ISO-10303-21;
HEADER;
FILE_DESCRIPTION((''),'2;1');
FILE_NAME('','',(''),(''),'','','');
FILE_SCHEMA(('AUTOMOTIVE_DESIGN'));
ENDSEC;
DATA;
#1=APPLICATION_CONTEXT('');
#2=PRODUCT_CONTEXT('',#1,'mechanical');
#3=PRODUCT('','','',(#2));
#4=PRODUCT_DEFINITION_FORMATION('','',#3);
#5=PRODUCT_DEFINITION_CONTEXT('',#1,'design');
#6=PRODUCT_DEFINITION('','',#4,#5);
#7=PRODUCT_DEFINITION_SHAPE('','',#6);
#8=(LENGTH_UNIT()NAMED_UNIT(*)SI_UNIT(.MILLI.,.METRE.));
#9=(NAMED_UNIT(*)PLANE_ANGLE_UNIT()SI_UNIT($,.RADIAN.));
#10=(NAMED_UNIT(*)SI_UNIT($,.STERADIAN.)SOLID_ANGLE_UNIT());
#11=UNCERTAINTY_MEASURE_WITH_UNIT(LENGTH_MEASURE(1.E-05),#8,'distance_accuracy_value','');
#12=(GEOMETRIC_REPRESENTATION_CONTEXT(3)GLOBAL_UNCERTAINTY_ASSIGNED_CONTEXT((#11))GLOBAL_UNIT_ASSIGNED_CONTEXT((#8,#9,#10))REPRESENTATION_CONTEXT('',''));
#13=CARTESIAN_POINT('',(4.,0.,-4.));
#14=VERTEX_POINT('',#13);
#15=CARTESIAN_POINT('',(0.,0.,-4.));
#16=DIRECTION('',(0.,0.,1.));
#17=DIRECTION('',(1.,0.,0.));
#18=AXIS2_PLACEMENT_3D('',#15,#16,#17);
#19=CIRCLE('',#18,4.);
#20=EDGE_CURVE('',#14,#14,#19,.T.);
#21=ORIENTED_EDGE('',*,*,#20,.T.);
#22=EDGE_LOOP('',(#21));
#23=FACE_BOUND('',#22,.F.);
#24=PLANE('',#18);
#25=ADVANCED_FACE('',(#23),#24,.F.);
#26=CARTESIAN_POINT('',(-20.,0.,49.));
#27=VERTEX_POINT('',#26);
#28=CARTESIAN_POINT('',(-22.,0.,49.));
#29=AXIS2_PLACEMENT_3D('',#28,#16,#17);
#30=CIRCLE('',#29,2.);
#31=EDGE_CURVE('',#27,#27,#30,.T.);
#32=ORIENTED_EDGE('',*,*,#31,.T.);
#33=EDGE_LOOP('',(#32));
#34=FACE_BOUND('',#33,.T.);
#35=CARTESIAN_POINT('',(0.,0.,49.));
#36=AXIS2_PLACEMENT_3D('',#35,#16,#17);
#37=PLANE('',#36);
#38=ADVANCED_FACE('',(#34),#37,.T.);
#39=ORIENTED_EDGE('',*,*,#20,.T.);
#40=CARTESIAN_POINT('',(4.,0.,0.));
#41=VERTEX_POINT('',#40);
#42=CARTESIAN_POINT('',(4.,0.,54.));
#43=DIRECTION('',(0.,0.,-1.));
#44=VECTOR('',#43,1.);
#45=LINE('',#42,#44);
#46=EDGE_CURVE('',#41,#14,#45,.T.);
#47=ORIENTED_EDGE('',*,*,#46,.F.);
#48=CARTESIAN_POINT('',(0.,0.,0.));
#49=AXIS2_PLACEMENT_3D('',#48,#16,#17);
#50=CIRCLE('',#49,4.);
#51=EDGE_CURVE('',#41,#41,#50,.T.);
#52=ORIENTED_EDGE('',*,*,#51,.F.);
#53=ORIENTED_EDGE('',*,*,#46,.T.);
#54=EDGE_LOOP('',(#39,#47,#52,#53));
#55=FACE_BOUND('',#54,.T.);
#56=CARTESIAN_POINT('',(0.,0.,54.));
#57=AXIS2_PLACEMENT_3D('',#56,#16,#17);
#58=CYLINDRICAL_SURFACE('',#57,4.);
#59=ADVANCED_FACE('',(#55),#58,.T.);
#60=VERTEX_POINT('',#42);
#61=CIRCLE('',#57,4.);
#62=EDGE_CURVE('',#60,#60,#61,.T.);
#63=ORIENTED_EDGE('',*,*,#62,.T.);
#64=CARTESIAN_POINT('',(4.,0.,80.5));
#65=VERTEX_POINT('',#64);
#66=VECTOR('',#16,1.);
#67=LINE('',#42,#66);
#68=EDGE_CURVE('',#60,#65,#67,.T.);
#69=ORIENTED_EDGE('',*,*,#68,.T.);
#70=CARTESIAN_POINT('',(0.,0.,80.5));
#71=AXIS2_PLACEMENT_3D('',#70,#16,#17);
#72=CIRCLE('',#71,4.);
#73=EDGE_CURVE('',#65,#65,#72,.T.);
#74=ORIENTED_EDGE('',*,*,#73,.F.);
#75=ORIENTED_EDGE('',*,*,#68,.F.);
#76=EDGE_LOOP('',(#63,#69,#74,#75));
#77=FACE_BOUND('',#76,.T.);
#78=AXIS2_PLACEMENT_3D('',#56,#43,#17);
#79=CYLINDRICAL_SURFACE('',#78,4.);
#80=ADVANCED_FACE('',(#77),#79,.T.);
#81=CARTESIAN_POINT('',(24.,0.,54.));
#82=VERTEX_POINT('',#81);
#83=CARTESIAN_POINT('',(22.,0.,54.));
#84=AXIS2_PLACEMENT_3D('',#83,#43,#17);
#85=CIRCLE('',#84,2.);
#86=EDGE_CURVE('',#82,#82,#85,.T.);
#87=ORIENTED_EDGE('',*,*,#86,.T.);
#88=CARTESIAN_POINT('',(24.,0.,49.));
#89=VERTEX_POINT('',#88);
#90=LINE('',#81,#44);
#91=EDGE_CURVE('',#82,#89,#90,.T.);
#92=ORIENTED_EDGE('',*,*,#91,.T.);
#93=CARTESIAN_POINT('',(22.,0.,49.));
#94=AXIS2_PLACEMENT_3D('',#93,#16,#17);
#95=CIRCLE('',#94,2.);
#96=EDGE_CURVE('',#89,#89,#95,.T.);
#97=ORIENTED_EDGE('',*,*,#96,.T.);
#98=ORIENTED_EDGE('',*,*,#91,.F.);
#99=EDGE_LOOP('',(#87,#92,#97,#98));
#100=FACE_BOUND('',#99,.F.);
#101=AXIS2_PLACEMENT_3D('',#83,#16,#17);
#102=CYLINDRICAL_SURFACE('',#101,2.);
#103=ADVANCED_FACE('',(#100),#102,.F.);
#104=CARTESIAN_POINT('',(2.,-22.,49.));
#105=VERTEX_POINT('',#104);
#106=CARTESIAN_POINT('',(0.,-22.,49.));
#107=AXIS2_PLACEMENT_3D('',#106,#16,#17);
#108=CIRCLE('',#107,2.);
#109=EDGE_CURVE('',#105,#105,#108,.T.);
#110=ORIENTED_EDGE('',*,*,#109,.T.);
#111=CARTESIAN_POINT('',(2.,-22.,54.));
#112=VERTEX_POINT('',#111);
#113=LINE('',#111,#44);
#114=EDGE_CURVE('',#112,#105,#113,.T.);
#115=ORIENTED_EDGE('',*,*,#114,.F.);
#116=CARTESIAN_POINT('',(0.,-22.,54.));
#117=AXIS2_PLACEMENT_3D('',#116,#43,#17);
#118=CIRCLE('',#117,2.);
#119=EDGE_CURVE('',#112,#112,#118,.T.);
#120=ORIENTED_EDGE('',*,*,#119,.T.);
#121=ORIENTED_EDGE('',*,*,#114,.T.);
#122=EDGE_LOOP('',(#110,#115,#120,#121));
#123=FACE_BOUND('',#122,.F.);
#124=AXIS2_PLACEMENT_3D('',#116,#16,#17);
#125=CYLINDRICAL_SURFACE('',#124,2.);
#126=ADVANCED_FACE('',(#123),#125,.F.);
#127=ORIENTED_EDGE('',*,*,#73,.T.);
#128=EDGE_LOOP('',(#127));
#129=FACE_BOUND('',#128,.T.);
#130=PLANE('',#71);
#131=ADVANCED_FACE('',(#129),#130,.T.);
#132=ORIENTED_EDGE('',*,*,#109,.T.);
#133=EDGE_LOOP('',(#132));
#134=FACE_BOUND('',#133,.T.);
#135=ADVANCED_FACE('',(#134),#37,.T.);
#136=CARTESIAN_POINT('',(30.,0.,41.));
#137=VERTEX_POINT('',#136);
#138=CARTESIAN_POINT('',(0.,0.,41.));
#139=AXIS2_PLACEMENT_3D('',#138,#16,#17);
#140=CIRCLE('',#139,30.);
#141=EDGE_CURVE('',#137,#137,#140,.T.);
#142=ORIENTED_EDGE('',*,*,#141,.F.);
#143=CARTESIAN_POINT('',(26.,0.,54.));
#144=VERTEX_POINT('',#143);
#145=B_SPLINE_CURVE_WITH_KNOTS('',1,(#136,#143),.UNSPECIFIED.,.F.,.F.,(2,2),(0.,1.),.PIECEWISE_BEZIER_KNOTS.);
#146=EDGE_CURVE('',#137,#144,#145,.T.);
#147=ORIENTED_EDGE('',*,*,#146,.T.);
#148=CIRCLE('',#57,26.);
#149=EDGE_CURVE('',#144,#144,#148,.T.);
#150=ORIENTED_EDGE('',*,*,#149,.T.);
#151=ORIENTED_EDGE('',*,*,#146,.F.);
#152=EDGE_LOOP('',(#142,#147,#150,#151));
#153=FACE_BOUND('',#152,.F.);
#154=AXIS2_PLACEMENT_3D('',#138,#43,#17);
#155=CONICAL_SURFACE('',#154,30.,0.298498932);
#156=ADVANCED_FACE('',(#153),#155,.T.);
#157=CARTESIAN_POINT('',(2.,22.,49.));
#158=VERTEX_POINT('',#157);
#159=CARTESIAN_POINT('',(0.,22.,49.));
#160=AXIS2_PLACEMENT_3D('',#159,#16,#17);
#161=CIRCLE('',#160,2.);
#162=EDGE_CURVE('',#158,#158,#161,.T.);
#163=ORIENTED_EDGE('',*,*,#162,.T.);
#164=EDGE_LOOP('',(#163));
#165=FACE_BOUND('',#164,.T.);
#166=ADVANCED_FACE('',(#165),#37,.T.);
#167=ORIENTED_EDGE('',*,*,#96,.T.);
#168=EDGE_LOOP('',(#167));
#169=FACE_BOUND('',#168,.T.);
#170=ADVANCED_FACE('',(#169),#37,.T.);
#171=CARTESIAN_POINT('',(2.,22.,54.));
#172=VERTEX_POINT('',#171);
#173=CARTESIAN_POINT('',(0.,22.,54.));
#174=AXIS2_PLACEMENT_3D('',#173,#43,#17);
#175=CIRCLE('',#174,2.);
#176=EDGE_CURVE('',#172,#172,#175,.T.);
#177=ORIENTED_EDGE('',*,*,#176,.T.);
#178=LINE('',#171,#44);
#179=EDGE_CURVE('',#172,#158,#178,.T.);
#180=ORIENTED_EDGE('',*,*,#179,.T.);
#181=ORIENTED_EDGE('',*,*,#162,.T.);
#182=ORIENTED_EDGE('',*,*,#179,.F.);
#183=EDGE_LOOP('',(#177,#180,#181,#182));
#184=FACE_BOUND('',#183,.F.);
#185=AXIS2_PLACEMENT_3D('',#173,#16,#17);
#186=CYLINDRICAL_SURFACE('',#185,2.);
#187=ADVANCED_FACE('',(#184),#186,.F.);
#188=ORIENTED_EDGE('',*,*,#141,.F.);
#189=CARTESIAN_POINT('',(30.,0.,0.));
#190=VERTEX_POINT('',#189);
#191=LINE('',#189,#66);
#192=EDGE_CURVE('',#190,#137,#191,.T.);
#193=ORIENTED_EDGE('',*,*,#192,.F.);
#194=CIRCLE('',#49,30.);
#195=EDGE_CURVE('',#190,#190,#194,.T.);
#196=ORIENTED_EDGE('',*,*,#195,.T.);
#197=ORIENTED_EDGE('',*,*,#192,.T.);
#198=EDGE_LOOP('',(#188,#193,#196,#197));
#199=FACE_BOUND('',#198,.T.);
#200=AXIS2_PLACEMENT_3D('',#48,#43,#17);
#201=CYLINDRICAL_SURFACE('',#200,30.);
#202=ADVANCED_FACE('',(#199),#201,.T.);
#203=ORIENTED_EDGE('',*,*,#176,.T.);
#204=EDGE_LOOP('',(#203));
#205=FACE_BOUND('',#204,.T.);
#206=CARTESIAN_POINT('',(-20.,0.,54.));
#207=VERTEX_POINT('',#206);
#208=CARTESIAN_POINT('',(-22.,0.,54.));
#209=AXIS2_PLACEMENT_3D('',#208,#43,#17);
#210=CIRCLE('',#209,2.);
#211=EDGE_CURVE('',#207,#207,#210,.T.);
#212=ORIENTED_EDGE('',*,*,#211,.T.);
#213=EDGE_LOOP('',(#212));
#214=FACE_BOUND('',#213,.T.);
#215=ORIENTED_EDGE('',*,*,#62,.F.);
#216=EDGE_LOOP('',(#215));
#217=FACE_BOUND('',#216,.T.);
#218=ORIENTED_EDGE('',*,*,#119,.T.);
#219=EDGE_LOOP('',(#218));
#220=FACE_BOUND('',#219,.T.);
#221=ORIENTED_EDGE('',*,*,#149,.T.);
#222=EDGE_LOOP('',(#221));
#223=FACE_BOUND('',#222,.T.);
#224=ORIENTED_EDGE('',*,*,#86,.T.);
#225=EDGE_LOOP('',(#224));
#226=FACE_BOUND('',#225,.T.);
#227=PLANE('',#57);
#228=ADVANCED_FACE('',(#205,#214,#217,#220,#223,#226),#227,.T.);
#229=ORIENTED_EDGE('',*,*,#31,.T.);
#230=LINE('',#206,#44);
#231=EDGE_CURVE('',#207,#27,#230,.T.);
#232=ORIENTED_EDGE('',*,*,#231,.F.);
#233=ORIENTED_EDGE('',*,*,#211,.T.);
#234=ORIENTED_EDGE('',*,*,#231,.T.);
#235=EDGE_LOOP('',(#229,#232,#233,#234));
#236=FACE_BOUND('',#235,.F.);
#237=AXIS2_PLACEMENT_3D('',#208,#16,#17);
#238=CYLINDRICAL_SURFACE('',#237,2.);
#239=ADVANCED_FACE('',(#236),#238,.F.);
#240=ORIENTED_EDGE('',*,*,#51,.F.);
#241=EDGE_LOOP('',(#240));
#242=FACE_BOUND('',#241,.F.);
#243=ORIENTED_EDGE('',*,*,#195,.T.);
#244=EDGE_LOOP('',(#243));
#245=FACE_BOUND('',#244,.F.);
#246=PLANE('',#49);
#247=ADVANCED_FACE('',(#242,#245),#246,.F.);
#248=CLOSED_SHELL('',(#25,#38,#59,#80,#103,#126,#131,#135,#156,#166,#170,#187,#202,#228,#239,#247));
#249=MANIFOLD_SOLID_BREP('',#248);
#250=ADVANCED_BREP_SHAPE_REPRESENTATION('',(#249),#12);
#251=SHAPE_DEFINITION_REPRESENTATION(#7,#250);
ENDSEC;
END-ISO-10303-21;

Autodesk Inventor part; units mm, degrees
ref_plane "YZ Plane" through (0, 0, 0) normal (1, 0, 0) x (0, 1, 0)
ref_plane "XZ Plane" through (0, 0, 0) normal (0, 1, 0) x (-1, 0, 0)
sketch "Sketch1" plane through (0, 0, 0) normal (0, 0, 1) x (1, 0, 0)
  circle A0 centre (0, 0) radius 30
  dimension "d0" = 60
extrude "Extrusion1" add sketch "Sketch1" along normal blind 41
ref_plane "Work Plane1" through (0, 0, 54) normal (0, 0, 1) x (1, 0, 0)
sketch "Sketch2" plane through (0, 0, 54) normal (0, 0, 1) x (1, 0, 0)
  circle A0 centre (0, 0) radius 26
  dimension "d4" = 52
loft "Loft1" add profiles "Sketch2" section 1 edges at (-30, 0, 41)
sketch "Sketch4" plane through (0, 0, 54) normal (0, 0, 1) x (1, 0, 0)
  point P0 (0, 0)
sketch "Sketch5" plane through (0, 0, 54) normal (0, 0, 1) x (1, 0, 0)
  circle A0 centre (0, 22) radius 2
  circle A1 centre (0, -22) radius 2
  circle A2 centre (0, 0) radius 22
  circle A3 centre (-22, 0) radius 2
  circle A4 centre (22, 0) radius 2
  dimension "d11" = 4
  dimension "d12" = 44
extrude "Extrusion2" cut sketch "Sketch5" against normal blind 5 contours A0 A2 | A2 A0 | A3 A2 | A2 A3 | A4 A2 | A2 A4 | A2 A1 | A1 A2
sketch "Sketch6" plane through (0, 0, 0) normal (0, 0, -1) x (-1, 0, 0)
  point P0 (0, 0)
sketch "Sketch7" plane through (0, 0, 54) normal (0, 0, 1) x (1, 0, 0)
  circle A0 centre (0, 0) radius 4
  dimension "d16" = 8
extrude "Extrusion3" add sketch "Sketch7" along normal blind 26.5 and the other way blind 58
properties part number "CH-1-02-driveMotor"
